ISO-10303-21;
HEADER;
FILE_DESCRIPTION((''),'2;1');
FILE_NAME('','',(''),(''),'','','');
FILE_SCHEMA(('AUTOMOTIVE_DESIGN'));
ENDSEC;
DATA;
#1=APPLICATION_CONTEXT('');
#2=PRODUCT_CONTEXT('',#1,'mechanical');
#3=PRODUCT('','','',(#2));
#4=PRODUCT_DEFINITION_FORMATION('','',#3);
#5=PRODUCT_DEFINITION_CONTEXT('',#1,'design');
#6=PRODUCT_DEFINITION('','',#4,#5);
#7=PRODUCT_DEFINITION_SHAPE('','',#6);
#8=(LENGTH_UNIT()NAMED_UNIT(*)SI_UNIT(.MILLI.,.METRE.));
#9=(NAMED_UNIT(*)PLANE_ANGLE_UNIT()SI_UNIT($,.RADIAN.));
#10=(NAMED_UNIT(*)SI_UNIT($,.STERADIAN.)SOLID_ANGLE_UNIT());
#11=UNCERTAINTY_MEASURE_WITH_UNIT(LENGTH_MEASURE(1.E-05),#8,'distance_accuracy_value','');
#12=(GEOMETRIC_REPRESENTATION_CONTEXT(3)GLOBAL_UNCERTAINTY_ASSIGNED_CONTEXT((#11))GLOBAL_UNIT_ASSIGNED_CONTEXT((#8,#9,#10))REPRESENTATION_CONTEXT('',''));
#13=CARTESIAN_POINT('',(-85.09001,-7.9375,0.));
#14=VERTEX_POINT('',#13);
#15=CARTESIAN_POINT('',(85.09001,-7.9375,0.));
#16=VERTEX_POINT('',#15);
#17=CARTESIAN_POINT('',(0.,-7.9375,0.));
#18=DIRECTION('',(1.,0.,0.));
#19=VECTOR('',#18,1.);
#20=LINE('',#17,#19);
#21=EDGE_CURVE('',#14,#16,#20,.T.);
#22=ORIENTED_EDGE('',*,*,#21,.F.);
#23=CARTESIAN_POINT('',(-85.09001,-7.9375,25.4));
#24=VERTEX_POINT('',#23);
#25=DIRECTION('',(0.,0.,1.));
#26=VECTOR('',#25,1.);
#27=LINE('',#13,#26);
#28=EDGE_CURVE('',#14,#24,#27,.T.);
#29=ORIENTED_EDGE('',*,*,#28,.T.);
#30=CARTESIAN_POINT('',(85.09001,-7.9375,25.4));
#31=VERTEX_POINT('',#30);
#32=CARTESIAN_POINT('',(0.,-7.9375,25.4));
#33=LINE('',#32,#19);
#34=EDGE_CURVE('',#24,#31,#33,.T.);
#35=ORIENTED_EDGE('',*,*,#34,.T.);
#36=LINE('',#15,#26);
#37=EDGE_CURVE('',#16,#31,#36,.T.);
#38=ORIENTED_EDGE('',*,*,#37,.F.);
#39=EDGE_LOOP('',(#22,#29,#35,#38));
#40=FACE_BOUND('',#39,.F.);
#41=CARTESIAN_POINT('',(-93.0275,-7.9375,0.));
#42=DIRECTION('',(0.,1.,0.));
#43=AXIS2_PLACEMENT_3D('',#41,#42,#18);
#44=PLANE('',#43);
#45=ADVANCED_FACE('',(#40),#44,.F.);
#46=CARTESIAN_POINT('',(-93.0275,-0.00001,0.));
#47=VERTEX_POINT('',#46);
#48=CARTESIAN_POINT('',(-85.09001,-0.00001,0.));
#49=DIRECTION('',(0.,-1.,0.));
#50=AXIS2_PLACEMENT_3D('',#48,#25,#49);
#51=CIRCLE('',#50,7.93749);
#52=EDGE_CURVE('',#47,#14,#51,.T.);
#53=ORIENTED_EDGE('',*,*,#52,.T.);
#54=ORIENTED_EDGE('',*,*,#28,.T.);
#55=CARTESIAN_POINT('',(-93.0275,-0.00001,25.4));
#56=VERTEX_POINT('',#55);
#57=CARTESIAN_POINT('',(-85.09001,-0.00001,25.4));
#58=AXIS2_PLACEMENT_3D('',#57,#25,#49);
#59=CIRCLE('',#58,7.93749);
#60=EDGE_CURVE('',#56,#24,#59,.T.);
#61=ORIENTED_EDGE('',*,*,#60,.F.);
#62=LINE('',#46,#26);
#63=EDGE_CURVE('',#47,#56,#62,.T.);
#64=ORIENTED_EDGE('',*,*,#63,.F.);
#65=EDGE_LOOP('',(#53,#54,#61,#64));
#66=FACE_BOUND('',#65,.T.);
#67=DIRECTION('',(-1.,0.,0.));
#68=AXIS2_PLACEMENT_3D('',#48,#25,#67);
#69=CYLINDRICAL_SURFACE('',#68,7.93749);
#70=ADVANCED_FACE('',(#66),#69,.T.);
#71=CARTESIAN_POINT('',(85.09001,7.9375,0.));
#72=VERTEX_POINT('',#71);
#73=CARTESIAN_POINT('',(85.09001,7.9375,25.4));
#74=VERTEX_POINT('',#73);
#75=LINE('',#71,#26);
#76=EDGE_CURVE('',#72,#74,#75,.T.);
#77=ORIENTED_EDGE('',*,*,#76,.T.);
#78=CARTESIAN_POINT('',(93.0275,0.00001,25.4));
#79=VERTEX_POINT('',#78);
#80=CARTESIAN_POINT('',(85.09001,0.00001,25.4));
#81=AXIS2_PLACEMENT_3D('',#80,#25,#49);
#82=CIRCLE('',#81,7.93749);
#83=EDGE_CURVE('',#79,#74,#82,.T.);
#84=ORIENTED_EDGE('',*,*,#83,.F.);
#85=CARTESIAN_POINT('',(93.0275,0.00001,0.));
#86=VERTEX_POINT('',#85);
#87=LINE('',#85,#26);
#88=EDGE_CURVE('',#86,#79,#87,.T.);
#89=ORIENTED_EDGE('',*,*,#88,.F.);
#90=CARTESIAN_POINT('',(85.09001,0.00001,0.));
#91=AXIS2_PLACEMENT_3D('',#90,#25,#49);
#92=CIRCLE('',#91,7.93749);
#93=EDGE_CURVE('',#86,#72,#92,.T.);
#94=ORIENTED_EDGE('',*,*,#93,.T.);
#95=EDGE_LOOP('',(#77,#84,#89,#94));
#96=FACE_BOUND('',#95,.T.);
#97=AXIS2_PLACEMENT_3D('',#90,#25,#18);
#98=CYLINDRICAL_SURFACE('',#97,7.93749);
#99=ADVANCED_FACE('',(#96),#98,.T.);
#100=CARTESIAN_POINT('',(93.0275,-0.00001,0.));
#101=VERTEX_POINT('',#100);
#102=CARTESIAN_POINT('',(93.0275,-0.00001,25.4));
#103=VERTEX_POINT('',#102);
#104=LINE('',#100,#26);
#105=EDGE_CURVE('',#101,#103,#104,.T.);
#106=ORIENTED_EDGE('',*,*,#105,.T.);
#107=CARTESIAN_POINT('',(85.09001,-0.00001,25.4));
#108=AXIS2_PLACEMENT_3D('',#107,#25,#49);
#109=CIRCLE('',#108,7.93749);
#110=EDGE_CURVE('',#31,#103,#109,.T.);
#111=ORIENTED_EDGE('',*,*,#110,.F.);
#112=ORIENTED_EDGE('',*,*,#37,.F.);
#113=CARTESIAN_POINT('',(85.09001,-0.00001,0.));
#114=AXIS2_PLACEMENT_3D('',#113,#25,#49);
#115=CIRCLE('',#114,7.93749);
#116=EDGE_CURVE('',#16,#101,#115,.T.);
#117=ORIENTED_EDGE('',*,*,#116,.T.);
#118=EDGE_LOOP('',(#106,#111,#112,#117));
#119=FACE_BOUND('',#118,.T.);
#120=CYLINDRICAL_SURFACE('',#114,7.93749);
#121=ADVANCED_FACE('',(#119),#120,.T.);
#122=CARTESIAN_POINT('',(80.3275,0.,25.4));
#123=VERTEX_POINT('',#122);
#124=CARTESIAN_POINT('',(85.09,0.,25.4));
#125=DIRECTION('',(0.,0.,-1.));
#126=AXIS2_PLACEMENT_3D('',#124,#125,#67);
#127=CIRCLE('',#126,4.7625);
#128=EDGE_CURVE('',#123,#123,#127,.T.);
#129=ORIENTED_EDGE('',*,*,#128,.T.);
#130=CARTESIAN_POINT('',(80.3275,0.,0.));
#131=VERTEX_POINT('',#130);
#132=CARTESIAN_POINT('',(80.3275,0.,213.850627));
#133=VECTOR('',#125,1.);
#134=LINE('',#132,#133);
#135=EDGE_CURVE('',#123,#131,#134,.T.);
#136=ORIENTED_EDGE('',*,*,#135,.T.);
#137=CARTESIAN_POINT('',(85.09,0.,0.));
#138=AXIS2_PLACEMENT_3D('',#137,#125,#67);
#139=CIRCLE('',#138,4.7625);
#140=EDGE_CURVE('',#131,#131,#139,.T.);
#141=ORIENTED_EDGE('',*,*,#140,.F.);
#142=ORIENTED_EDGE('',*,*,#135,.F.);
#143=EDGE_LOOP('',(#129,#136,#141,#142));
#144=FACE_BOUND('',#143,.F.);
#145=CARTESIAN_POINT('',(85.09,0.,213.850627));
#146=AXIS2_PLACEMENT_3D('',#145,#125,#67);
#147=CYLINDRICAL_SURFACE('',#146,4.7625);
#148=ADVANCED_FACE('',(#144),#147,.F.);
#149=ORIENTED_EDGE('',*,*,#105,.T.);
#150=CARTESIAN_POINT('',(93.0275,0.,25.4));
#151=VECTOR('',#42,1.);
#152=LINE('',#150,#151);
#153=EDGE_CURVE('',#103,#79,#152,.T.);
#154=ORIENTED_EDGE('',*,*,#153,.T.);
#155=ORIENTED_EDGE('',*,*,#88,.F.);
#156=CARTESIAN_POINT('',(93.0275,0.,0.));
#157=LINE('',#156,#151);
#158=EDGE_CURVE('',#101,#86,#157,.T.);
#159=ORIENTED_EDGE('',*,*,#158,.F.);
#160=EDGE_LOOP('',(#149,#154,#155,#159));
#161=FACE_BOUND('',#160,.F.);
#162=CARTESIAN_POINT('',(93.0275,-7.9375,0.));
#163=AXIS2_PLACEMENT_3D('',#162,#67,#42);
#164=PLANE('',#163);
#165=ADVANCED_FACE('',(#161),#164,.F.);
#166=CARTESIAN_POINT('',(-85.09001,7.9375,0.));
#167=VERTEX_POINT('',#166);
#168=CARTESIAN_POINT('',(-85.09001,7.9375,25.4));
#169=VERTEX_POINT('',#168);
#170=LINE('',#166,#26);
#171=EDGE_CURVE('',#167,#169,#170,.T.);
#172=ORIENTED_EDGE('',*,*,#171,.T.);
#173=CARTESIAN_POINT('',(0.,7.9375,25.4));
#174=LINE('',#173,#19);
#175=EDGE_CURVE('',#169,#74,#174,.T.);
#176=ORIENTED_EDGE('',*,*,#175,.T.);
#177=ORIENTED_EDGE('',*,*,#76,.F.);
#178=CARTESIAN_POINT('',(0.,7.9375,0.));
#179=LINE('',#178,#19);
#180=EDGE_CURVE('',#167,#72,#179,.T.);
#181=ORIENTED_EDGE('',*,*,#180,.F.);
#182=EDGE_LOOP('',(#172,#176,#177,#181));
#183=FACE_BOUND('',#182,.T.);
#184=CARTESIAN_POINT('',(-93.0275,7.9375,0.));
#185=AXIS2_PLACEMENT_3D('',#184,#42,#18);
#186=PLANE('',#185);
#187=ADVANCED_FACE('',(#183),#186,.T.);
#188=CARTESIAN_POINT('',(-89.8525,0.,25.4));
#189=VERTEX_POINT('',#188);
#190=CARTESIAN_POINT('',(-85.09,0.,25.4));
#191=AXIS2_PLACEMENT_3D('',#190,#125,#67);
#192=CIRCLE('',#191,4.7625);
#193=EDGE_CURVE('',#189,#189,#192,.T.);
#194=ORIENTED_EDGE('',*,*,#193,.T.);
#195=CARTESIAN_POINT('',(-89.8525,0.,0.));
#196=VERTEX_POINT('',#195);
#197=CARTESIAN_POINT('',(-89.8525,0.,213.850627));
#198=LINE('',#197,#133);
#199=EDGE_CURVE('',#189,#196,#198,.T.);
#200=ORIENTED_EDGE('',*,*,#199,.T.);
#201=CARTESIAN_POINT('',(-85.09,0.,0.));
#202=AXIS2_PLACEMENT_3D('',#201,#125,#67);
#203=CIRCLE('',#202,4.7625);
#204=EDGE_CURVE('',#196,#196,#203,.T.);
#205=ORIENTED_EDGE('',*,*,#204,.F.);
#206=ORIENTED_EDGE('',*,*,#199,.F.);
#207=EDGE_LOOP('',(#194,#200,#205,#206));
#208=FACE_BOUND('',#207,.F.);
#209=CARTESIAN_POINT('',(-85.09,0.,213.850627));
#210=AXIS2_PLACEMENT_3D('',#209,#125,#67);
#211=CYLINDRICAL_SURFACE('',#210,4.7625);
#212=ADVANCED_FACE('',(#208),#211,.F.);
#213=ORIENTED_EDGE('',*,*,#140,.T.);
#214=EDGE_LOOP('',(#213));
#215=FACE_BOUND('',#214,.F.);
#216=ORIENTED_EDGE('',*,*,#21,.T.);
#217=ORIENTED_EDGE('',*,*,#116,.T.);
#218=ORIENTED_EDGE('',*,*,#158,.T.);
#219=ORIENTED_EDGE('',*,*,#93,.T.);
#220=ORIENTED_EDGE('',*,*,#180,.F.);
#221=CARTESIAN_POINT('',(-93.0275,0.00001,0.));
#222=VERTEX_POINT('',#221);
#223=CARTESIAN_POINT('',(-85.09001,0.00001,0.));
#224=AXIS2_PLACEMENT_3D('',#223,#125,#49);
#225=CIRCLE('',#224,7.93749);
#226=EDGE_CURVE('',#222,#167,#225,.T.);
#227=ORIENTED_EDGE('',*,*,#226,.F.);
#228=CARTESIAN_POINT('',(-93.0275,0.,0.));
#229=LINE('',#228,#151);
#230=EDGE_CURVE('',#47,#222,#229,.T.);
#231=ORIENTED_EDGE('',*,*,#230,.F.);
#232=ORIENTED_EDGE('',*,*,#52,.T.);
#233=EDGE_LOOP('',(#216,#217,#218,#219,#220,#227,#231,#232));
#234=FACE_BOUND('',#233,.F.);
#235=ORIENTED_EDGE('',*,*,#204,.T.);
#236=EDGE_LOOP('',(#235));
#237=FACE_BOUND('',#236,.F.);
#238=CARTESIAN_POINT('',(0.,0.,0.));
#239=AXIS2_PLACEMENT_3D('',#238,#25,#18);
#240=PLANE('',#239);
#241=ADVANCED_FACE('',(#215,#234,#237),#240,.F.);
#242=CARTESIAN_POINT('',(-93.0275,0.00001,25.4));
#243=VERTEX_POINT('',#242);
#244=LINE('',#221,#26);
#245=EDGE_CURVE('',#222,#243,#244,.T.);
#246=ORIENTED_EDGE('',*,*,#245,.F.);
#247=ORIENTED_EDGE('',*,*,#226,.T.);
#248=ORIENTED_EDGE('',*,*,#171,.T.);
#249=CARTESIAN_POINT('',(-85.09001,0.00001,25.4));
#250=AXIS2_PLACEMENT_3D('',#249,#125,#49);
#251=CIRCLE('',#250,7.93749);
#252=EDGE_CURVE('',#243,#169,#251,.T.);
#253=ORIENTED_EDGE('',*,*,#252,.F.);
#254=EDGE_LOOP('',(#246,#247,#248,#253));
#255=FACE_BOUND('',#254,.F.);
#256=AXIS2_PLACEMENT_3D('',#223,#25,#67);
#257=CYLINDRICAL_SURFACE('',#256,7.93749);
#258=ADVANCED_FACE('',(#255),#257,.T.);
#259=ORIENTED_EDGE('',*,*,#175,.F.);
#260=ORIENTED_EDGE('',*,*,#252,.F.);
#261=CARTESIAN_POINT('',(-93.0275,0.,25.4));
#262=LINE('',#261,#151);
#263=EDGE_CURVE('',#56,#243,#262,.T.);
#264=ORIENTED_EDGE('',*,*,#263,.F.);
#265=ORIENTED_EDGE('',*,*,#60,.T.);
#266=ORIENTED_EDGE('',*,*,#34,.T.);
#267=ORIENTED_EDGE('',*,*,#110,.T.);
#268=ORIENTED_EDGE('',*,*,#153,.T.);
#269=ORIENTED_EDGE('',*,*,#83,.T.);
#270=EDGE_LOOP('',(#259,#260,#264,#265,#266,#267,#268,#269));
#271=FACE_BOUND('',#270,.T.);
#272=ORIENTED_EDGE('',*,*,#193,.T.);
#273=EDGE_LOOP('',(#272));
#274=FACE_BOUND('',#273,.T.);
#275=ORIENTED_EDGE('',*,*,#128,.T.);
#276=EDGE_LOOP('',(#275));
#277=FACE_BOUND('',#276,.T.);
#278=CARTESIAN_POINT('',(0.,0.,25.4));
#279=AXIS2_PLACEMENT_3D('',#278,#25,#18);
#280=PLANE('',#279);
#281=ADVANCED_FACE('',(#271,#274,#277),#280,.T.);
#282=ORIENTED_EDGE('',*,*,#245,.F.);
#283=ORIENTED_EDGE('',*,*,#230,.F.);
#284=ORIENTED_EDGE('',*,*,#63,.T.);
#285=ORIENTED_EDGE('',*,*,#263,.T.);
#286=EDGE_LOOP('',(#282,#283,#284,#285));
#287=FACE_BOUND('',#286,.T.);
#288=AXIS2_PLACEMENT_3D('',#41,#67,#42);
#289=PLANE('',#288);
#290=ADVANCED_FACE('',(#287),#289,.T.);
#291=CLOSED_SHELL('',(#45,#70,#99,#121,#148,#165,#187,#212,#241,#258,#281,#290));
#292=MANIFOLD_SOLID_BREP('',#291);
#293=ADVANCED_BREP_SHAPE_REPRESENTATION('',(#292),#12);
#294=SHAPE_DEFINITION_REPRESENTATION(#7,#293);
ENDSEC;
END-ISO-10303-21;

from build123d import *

# Parameters (mm, degrees)
F0_W     = 186.055
F0_H     = 15.875
F1_DEPTH = 25.4
F2_R     = 7.93749
F4_D     = 9.525


# Not quite as in the source:
# - a fillet or chamfer is up to 0.001 mm smaller than in the source, because OpenCascade refuses the exact size


with BuildPart() as f1:
    # F0 (on Top) → F1 (new body)
    with BuildSketch(Plane.XY):
        Rectangle(F0_W, F0_H)
    extrude(amount=F1_DEPTH)

    # F2 (radius 7.9375 in the source; OpenCascade refuses exactly that, so slightly less here)
    f2_edges = [f1.edges().sort_by_distance(p)[0] for p in [
        (-93.0275, -7.9375, 12.7),
        (-93.0275, 7.9375, 12.7),
        (93.0275, -7.9375, 12.7),
        (93.0275, 7.9375, 12.7),
    ]]
    fillet(f2_edges, radius=F2_R)

    # F4 (through all)
    with Locations(Plane.XY.offset(25.4)):
        with Locations((-85.09, 0), (85.09, 0)):
            Hole(F4_D / 2)


solid = f1.part
